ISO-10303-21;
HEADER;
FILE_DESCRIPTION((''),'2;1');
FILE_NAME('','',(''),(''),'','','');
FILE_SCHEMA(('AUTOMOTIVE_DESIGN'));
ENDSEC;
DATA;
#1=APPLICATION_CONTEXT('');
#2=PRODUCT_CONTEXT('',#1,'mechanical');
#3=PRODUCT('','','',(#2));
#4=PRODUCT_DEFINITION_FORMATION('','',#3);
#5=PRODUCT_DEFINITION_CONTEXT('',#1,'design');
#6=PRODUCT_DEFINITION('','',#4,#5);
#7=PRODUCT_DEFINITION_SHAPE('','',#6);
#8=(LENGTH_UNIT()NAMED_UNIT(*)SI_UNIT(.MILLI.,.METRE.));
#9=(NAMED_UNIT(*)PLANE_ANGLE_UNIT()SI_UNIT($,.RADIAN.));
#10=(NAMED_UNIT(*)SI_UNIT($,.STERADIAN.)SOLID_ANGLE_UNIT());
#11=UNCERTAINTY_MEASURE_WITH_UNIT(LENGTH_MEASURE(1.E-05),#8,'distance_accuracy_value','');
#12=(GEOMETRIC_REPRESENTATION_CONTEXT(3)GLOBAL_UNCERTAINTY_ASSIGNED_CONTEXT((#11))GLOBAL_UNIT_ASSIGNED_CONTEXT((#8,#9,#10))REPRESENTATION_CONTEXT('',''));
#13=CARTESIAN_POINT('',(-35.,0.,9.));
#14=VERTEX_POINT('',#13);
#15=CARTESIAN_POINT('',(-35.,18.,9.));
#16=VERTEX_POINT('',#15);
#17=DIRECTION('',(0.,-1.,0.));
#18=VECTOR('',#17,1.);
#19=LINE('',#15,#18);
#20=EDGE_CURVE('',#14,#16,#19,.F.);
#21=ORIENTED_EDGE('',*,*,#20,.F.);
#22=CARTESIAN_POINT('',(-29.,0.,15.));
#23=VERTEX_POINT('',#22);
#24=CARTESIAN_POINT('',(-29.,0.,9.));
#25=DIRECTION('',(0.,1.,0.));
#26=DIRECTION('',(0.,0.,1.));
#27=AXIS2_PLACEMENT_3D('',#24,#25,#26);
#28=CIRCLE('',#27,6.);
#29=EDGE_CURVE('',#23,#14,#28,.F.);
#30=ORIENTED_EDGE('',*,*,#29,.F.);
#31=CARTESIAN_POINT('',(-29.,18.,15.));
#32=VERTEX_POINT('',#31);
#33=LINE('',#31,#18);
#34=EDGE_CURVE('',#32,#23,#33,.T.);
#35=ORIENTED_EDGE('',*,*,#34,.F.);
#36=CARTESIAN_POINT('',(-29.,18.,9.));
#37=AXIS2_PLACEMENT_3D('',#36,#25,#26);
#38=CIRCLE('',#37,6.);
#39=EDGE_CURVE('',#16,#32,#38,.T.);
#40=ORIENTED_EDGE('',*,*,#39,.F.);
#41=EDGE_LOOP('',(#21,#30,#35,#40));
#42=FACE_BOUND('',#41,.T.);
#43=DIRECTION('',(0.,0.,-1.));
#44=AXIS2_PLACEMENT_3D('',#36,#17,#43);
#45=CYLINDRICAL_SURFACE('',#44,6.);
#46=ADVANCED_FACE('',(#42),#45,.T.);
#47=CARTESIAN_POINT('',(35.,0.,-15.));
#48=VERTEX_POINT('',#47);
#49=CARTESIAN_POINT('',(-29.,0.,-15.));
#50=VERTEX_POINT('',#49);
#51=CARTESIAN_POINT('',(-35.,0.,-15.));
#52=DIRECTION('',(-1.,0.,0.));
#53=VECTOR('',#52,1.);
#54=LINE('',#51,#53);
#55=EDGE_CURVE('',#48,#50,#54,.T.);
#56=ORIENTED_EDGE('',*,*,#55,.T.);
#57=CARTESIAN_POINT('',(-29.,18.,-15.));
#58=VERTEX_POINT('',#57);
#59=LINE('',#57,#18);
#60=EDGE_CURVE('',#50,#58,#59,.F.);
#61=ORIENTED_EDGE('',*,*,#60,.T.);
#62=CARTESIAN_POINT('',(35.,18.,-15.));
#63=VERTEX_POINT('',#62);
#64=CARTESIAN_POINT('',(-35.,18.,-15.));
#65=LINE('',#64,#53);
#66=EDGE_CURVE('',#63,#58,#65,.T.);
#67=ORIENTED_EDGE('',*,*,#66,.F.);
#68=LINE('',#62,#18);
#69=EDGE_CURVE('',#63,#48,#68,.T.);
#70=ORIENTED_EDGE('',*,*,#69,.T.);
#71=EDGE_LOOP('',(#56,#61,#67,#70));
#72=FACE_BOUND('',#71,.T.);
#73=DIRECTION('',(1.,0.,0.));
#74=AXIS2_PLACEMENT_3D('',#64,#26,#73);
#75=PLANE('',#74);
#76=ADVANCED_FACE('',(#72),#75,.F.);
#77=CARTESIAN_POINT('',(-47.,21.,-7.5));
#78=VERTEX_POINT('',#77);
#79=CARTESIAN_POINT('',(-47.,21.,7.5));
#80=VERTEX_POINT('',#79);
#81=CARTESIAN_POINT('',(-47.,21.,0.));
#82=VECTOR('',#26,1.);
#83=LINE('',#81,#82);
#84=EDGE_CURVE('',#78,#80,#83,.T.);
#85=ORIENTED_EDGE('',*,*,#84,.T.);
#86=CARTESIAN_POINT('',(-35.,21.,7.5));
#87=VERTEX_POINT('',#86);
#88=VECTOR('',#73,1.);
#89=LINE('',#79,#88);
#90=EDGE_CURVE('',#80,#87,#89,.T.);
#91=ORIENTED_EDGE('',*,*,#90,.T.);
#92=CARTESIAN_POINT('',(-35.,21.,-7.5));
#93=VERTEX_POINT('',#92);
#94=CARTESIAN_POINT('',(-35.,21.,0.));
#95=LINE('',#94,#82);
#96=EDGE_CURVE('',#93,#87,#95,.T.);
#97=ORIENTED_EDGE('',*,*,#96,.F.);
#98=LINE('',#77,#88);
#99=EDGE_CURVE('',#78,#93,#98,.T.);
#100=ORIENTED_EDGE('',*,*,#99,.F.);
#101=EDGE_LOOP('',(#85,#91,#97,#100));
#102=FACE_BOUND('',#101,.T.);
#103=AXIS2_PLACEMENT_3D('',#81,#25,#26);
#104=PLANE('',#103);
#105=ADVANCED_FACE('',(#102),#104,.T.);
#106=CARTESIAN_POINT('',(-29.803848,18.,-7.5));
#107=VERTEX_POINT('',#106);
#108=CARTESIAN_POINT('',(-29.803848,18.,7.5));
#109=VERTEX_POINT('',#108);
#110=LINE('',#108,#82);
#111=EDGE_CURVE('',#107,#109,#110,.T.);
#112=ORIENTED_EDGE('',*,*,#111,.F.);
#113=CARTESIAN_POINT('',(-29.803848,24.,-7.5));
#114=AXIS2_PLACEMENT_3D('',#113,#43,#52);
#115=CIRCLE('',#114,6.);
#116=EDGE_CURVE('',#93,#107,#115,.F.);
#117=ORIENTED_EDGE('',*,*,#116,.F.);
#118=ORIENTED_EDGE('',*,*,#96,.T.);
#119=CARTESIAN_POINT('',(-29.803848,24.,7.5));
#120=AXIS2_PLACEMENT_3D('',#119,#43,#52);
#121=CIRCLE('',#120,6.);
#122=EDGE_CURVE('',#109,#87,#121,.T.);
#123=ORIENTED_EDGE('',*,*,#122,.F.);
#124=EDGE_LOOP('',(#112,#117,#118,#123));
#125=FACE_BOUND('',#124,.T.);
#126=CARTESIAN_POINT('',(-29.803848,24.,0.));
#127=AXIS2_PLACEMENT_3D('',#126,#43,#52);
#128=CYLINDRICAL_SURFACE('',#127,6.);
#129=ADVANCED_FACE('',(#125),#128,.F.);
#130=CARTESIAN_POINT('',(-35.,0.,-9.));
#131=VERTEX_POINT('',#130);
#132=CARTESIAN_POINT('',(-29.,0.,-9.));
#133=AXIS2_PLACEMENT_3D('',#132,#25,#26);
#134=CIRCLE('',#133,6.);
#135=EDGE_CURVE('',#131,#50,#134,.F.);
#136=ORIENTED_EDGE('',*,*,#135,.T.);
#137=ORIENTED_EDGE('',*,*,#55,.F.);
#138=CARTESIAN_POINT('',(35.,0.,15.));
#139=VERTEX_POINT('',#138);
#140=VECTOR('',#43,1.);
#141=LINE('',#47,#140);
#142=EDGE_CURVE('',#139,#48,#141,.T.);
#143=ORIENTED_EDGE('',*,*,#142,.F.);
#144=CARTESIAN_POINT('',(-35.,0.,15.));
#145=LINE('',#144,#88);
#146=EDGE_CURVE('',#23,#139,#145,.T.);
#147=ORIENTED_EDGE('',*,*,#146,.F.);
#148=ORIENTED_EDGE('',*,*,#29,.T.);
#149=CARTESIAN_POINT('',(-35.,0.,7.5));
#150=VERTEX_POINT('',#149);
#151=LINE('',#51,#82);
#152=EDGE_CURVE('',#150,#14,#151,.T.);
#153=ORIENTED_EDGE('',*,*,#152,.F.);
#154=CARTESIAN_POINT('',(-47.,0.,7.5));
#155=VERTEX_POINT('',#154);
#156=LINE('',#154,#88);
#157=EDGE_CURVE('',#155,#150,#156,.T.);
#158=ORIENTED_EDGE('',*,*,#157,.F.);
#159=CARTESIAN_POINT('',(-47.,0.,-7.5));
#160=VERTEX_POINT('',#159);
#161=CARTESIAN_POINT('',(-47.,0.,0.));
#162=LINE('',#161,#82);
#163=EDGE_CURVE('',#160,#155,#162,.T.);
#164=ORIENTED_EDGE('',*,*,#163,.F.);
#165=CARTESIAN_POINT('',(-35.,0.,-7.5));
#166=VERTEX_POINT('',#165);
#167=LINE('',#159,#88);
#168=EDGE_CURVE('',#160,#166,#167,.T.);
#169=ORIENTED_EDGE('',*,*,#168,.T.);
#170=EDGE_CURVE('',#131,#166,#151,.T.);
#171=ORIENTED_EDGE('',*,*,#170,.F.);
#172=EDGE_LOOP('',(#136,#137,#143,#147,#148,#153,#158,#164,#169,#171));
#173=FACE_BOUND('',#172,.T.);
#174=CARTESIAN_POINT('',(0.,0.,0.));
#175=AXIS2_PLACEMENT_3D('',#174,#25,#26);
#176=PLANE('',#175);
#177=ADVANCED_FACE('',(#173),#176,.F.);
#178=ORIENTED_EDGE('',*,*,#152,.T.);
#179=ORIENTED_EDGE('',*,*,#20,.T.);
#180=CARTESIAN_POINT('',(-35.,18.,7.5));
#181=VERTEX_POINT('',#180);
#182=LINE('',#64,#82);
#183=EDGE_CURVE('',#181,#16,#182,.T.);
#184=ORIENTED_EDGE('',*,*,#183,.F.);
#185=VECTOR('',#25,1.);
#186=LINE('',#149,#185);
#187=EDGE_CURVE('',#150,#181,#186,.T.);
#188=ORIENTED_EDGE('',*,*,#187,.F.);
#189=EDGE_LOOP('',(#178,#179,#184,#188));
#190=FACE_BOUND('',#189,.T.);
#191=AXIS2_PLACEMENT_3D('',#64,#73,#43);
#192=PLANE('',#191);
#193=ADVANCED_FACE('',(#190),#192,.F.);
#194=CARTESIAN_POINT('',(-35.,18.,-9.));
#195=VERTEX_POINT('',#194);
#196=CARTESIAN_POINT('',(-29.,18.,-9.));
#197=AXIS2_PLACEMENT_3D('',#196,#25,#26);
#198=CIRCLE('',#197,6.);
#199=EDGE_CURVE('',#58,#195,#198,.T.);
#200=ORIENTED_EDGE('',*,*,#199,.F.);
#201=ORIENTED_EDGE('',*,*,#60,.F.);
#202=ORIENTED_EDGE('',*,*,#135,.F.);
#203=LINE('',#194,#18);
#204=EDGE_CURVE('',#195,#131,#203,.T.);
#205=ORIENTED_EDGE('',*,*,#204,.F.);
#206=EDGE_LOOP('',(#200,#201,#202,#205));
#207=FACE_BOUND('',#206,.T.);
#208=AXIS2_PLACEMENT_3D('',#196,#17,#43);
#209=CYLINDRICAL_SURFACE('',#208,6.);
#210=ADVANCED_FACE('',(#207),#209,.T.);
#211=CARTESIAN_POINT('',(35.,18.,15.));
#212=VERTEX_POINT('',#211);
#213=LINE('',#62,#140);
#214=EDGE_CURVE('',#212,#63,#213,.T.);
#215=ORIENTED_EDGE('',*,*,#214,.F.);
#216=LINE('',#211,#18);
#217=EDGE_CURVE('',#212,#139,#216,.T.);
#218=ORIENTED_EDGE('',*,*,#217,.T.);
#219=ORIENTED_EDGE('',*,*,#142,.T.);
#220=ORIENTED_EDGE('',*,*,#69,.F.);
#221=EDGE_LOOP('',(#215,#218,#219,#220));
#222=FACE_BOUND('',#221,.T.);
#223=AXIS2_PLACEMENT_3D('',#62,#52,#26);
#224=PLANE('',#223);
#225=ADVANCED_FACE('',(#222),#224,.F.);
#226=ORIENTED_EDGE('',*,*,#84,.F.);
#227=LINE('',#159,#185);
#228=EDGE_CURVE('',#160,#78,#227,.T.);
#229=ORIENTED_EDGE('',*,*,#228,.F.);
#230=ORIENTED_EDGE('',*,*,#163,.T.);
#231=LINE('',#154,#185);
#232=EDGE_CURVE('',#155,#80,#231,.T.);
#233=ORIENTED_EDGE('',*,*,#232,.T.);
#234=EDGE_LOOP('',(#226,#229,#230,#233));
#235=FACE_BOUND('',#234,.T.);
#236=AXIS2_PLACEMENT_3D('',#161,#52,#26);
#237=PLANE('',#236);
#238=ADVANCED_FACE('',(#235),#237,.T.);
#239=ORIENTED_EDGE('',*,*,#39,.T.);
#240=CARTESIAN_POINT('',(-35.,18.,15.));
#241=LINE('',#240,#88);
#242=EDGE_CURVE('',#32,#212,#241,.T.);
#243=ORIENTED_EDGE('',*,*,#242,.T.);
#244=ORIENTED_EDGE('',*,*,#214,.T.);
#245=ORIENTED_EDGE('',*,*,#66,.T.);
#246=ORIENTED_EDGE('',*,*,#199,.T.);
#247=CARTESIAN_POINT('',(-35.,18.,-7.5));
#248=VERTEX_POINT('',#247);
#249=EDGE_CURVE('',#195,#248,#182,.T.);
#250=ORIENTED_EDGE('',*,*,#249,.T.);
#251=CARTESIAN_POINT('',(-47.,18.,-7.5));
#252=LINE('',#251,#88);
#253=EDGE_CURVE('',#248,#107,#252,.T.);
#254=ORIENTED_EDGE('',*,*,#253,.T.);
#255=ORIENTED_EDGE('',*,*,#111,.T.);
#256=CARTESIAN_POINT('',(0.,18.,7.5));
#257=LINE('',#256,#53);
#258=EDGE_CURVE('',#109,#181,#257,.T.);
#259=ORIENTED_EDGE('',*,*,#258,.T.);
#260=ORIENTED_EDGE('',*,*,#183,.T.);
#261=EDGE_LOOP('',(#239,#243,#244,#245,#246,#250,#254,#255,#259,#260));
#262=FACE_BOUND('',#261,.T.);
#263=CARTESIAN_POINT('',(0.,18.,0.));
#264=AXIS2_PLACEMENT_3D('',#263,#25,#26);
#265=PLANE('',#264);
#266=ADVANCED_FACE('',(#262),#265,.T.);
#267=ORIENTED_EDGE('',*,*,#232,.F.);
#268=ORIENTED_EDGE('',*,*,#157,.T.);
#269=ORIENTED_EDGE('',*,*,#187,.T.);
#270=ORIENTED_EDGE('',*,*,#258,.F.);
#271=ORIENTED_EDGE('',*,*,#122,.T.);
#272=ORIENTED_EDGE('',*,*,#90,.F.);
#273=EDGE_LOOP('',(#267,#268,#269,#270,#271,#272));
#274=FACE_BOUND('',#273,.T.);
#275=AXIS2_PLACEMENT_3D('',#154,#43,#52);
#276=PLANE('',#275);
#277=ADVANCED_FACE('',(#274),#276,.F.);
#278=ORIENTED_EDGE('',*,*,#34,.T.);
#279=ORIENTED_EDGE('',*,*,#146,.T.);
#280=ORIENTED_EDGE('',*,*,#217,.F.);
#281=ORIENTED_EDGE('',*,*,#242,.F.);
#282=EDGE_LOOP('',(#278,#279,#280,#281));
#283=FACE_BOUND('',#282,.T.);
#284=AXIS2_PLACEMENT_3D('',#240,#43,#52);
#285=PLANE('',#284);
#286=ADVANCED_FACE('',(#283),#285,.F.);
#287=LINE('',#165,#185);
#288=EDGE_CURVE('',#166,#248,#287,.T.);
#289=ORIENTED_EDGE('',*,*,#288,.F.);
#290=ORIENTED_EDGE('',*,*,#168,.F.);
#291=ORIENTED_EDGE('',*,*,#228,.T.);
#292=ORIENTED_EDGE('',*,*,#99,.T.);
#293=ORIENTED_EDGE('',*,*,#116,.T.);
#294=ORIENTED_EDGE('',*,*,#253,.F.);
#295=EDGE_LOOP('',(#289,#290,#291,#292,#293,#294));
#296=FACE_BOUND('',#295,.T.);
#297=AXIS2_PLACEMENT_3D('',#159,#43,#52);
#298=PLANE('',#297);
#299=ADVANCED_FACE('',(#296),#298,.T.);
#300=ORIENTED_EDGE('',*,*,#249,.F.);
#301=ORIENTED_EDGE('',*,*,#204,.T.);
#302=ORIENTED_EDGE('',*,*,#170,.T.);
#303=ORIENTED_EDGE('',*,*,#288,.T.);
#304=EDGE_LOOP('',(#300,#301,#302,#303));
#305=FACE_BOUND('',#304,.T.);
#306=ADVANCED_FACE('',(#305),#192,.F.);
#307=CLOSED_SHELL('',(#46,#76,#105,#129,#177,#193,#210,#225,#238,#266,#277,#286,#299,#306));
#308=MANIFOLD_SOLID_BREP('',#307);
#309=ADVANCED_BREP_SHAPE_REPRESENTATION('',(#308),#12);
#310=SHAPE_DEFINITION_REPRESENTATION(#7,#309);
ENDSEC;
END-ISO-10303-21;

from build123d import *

# Parameters (mm, degrees)
SKETCH_1_W      = 70
SKETCH_1_H      = 30
EXTRUDE_1_DEPTH = 18
FILLET_1_R      = 6
SKETCH_2_W      = 15
SKETCH_2_H      = 3
SKETCH_2_H_2    = 18
EXTRUDE_2_DEPTH = 12
FILLET_2_R      = 6


with BuildPart() as part:
    # 草图1 → 凸台-拉伸1 (new body)
    with BuildSketch(Plane(origin=(0, 0, 0), x_dir=(1, 0, 0), z_dir=(0, 1, 0))):
        Rectangle(SKETCH_1_W, SKETCH_1_H)
    extrude(amount=EXTRUDE_1_DEPTH)

    # 圆角1
    fillet_1_edges = [part.edges().sort_by_distance(p)[0] for p in [
        (-35, 9, 15),
        (-35, 9, -15),
    ]]
    fillet(fillet_1_edges, radius=FILLET_1_R)

    # 草图2 → 凸台-拉伸2 (add)
    with BuildSketch(Plane.ZY.offset(35)):
        with Locations((0, 19.5)):
            Rectangle(SKETCH_2_W, SKETCH_2_H)
        with Locations((0, 9)):
            Rectangle(SKETCH_2_W, SKETCH_2_H_2)
    extrude(amount=EXTRUDE_2_DEPTH)

    # 圆角2
    # the kernel refuses this fillet: 6 mm, written as the material it adds along each edge
    with BuildSketch(Plane(origin=(-35, 18, 7.5), x_dir=(1, 0, 0), z_dir=(0, 0, -1))) as fillet_2_piece_1:
        with BuildLine():
            CenterArc((5.196152423, -6), FILLET_2_R, 90, 60)
            Line((0, -3), (0, 0))
            Line((0, 0), (5.196152423, 0))
        make_face()
    extrude(amount=15)


solid = part.part
